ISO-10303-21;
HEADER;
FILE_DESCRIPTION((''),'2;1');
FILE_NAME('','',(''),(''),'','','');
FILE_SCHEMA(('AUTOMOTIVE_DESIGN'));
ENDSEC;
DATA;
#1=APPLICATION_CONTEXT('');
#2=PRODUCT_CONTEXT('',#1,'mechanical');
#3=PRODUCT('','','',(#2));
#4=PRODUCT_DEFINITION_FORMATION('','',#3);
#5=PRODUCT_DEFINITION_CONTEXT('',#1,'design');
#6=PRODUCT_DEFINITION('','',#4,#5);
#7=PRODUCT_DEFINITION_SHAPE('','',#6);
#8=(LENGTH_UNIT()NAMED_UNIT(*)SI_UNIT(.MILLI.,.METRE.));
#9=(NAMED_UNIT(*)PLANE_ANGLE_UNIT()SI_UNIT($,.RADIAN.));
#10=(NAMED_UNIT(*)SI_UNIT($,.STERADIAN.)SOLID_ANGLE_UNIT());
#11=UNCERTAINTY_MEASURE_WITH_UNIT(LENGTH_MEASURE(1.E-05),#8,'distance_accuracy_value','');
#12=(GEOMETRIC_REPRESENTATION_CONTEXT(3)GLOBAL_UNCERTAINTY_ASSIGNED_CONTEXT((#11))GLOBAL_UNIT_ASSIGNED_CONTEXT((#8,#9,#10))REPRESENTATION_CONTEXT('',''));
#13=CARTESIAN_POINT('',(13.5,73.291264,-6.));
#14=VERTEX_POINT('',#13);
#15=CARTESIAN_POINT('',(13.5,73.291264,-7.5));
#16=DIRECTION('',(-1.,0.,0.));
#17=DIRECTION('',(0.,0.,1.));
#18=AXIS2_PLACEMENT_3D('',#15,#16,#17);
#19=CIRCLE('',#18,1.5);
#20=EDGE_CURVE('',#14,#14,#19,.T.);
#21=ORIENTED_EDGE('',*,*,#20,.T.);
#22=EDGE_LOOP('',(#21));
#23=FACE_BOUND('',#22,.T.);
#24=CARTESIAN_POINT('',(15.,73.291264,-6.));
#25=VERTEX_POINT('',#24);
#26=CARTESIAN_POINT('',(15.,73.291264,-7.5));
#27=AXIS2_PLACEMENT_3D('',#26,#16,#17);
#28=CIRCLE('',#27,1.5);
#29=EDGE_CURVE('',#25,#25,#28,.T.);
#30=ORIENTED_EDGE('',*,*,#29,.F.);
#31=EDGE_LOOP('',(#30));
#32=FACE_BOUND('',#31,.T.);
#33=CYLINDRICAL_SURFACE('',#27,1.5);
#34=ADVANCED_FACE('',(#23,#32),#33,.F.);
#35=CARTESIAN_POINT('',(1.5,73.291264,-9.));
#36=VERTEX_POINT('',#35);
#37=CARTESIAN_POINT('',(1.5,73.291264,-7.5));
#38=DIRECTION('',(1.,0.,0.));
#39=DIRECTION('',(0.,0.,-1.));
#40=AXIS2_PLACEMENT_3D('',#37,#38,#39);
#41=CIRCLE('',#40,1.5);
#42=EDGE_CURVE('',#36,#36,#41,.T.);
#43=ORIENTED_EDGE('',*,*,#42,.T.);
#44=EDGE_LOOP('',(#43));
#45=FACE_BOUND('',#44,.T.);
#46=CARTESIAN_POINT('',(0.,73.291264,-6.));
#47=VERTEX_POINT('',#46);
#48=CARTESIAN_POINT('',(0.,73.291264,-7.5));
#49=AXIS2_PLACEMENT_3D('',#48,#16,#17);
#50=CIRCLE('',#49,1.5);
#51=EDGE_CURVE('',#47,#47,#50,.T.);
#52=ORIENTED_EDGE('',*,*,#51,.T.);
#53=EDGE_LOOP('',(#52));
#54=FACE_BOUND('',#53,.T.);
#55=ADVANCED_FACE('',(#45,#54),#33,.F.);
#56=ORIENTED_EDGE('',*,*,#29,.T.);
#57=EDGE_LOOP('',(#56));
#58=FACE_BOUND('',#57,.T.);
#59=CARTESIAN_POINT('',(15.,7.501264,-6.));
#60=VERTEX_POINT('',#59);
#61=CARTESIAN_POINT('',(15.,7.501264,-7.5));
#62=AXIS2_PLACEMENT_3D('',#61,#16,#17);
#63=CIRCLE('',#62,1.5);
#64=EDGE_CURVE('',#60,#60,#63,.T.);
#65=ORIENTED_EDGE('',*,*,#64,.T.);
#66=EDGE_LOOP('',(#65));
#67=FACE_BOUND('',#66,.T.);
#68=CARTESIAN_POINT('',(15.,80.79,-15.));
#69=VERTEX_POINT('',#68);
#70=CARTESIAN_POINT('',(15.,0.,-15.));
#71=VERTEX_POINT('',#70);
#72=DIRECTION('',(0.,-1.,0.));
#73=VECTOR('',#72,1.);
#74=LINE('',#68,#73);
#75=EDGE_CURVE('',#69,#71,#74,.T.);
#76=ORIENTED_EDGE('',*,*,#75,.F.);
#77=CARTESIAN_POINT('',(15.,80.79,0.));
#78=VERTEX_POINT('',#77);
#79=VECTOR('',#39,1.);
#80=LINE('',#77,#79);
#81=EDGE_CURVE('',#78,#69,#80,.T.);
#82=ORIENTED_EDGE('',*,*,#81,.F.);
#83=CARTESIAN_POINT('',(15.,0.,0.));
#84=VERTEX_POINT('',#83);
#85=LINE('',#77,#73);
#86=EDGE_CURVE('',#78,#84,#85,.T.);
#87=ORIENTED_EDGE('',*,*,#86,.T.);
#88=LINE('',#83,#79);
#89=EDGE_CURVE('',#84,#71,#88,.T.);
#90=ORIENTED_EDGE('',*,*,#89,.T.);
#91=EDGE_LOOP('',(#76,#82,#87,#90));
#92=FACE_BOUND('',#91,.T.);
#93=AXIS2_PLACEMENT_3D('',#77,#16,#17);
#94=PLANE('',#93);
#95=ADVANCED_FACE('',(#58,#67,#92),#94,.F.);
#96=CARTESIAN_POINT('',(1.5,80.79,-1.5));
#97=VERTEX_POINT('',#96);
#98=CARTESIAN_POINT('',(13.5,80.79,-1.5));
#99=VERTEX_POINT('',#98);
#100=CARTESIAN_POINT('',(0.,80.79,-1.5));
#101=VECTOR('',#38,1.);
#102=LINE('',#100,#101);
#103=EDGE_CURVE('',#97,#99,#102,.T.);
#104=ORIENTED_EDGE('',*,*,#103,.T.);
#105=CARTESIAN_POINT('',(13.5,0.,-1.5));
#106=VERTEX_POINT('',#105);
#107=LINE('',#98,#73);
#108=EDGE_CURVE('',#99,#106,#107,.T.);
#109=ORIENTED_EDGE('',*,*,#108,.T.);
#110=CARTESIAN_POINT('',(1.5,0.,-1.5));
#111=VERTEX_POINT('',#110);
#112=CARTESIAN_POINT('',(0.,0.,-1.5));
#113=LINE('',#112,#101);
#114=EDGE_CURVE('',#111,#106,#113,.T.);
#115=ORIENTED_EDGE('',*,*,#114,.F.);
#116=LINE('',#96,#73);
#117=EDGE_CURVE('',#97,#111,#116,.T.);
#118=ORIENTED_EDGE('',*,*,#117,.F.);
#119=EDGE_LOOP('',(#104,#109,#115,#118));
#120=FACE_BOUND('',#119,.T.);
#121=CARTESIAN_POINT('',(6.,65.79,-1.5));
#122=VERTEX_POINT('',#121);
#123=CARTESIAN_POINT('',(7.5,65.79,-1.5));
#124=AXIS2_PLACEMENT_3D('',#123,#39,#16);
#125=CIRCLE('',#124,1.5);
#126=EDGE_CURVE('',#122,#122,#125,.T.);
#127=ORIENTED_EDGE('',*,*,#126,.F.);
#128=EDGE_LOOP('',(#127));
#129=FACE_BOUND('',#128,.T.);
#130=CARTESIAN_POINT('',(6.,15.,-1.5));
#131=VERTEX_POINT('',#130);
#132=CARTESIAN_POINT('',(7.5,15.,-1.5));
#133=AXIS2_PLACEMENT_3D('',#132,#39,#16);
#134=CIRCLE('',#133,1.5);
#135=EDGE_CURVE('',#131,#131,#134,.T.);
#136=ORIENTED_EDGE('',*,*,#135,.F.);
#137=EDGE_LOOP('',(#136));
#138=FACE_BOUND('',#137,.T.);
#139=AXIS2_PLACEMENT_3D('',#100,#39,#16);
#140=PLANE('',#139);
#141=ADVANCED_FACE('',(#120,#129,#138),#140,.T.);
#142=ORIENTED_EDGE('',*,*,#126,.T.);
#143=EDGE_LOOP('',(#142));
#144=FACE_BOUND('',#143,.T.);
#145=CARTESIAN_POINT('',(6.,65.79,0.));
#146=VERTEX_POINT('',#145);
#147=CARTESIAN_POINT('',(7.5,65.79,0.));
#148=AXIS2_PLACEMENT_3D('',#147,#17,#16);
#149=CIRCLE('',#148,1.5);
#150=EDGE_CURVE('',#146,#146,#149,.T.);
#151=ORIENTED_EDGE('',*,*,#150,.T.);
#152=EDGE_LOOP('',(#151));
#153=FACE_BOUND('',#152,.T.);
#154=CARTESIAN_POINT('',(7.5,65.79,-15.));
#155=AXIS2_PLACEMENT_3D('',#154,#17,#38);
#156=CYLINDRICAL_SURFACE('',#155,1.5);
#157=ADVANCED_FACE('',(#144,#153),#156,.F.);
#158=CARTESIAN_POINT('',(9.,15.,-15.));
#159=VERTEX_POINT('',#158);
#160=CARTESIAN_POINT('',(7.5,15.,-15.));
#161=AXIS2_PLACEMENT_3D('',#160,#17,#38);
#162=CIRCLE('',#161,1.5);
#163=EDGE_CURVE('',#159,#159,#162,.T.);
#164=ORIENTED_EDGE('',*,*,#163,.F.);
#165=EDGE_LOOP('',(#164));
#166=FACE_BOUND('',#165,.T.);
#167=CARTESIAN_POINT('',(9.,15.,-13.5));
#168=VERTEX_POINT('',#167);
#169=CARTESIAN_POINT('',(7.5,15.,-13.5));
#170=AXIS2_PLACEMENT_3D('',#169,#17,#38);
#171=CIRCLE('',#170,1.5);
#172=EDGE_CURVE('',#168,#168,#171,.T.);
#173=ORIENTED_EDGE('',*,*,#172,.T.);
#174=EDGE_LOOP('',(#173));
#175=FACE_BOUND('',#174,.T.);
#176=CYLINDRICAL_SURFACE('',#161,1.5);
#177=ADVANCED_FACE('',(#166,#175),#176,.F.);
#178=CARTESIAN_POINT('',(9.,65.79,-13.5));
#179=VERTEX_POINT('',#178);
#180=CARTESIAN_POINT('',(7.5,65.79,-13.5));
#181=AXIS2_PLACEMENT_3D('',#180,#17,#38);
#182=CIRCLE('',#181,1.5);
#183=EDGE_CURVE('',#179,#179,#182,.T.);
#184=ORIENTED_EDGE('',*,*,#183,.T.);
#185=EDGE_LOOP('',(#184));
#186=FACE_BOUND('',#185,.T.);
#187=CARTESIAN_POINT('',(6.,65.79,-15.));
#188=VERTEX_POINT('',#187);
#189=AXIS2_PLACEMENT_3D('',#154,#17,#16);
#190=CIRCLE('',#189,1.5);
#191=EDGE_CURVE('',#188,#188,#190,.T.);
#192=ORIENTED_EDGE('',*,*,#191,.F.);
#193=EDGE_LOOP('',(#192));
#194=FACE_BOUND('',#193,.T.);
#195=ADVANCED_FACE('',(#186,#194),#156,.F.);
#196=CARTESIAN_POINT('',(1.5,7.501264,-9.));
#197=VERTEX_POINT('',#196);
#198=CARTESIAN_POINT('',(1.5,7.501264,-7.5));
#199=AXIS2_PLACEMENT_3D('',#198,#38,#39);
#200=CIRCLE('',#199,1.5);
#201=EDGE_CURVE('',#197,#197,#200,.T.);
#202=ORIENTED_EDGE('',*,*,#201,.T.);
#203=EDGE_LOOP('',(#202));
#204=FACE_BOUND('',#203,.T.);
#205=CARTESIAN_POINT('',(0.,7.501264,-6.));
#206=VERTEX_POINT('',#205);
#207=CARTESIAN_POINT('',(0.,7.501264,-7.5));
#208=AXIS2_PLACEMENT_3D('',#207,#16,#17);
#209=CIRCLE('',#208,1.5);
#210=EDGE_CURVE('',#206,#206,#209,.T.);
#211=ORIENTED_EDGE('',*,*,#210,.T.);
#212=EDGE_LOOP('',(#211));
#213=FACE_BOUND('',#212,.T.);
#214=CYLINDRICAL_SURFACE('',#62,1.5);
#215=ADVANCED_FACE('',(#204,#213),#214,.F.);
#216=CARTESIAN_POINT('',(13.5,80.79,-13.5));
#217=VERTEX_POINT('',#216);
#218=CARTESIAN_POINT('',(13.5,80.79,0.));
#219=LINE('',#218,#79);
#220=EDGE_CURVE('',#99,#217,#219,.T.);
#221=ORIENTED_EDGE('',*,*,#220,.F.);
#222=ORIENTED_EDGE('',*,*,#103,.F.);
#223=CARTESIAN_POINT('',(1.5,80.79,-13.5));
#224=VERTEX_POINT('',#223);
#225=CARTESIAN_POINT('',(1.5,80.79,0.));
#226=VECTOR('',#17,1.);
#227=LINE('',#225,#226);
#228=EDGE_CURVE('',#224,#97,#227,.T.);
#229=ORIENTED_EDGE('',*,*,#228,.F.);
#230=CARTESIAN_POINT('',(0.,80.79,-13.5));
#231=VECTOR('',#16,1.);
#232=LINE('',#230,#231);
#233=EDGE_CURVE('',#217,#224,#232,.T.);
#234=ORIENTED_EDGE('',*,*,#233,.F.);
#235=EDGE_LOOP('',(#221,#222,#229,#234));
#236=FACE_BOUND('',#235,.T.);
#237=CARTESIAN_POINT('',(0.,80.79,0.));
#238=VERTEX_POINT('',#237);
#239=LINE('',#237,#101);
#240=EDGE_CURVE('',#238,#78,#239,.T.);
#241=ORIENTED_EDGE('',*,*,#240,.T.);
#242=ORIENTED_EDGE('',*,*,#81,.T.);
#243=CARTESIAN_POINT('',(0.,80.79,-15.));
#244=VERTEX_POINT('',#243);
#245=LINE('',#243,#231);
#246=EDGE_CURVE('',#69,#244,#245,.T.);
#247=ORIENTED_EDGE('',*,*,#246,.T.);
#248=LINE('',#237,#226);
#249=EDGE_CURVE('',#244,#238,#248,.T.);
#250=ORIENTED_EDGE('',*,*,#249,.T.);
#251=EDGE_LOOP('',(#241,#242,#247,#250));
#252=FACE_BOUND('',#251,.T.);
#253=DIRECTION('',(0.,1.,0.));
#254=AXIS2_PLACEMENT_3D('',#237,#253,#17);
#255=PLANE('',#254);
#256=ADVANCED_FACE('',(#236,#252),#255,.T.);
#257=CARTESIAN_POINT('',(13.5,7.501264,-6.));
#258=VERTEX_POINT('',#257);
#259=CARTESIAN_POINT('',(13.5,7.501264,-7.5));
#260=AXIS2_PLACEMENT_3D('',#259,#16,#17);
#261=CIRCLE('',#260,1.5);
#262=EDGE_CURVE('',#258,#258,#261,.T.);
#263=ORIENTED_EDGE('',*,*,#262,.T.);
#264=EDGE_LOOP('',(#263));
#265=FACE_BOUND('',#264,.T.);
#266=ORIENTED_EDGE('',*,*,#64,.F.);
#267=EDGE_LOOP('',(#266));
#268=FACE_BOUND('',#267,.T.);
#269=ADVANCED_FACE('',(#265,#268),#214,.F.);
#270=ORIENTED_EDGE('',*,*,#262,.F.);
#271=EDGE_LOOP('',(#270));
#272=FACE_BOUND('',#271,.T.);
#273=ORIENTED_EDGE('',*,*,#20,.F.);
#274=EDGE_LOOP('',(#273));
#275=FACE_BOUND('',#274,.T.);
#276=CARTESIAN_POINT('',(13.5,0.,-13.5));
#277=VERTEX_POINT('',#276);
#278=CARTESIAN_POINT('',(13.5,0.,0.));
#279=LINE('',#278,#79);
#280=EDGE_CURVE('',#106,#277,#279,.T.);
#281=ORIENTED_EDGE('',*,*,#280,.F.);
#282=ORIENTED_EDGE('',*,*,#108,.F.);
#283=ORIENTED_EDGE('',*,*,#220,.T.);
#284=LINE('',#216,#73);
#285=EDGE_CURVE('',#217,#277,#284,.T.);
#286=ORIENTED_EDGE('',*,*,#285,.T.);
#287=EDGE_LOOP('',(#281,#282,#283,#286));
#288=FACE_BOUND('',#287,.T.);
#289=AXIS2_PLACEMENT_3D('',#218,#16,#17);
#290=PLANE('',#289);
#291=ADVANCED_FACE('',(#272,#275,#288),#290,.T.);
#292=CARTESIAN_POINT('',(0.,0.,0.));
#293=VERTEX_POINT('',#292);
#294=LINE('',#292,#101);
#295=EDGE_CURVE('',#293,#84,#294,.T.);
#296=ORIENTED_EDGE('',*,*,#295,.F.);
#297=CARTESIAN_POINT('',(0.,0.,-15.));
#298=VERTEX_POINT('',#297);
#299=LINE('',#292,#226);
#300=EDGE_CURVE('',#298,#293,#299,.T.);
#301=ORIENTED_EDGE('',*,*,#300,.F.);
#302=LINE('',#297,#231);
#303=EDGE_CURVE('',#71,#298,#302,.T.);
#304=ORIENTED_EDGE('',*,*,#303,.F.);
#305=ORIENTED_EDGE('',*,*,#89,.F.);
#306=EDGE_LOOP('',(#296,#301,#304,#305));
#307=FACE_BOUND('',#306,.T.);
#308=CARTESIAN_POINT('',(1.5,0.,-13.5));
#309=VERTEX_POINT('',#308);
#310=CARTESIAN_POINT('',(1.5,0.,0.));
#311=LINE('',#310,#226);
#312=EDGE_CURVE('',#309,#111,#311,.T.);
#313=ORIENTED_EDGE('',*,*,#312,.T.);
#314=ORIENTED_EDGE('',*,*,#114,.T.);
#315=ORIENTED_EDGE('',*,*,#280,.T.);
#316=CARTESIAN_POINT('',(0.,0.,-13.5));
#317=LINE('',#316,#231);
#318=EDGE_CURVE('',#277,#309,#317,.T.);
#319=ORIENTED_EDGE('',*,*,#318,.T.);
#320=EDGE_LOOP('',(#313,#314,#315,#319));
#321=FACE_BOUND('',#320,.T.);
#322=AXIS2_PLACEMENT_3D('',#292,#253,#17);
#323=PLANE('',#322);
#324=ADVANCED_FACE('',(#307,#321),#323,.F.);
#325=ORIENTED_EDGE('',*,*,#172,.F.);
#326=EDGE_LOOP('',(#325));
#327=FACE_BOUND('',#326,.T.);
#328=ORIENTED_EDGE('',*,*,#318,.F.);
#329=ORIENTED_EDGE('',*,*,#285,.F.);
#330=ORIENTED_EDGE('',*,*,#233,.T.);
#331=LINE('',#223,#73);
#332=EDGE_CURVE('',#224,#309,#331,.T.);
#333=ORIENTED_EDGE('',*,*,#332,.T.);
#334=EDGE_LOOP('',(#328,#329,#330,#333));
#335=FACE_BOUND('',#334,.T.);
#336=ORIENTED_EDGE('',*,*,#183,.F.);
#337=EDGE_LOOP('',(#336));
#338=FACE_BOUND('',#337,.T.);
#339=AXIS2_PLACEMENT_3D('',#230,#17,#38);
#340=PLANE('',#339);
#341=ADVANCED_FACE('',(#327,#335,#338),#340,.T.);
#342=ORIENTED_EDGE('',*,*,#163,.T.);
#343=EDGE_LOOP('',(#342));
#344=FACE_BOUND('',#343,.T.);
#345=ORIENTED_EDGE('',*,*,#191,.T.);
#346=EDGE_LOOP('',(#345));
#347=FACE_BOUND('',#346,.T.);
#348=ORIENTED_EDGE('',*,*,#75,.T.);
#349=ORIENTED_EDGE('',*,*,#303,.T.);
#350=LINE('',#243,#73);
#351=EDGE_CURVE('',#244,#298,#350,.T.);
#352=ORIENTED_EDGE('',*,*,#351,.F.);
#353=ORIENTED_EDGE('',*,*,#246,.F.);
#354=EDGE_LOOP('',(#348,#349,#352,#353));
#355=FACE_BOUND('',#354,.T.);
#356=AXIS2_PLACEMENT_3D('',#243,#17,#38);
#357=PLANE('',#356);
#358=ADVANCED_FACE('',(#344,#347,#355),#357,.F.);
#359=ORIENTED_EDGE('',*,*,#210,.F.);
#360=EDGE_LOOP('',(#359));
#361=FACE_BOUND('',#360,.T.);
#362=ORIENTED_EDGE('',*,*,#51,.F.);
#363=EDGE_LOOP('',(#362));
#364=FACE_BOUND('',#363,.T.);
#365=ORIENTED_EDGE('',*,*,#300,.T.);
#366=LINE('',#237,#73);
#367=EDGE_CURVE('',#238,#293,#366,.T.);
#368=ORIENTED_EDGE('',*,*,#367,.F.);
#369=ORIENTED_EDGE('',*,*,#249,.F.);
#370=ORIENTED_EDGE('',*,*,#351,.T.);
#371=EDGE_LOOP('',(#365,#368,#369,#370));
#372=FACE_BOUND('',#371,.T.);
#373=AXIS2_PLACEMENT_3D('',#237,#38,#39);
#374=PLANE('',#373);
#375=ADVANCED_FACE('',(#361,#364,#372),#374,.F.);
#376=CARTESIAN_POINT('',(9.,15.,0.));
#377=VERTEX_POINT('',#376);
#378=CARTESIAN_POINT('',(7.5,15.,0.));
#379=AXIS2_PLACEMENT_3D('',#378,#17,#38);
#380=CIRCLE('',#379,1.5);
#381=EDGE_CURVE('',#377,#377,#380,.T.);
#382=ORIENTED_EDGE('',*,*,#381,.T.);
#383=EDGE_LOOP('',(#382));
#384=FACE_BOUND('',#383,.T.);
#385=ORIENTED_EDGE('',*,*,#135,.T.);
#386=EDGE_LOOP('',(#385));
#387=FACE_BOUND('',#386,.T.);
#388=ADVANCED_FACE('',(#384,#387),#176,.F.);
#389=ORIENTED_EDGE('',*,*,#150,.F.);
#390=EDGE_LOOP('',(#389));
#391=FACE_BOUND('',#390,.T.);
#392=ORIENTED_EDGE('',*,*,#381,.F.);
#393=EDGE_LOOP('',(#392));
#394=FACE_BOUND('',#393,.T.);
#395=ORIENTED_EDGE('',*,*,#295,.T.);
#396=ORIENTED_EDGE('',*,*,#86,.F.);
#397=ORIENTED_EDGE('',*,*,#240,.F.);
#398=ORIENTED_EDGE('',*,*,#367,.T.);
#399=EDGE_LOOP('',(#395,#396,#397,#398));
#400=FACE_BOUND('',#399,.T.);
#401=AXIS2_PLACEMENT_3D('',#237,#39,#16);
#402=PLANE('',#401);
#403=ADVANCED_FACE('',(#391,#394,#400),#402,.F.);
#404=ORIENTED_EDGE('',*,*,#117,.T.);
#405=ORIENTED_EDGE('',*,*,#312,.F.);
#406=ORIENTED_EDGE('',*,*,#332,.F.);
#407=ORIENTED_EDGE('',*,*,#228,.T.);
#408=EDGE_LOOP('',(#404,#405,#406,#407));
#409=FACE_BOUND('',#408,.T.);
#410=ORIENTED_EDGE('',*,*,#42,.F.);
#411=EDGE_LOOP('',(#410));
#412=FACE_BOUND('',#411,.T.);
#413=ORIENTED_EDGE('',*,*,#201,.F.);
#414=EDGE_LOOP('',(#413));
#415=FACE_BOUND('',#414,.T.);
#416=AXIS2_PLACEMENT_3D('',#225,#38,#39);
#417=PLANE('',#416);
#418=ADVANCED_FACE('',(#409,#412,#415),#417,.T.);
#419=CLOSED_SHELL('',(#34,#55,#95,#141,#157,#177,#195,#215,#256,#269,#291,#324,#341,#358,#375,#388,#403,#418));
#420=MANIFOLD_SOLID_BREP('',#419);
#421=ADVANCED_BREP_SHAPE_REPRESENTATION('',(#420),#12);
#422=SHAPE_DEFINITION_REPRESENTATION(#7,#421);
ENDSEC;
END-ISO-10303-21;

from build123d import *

# Parameters (mm, degrees)
SKETCH1_W              = 15
SKETCH1_H              = 15
SKETCH1_W_2            = 12
SKETCH1_H_2            = 12
EXTRUDE_THIN1_DEPTH    = 80.79
CUT_EXTRUDE1_OUTLINE_R = 1.5
CUT_EXTRUDE1_DEPTH     = 15
SKETCH3_R              = 1.5
CUT_EXTRUDE2_DEPTH     = 84.528582533


# Read off the part's stored shape, not the designer's step: Cut-Extrude1
with BuildPart() as part:
    # Sketch1 → Extrude-Thin1 (new body)
    with BuildSketch(Plane(origin=(0, 0, 0), x_dir=(1, 0, 0), z_dir=(0, 1, 0))):
        with Locations((7.5, 7.5)):
            Rectangle(SKETCH1_W, SKETCH1_H)
        with Locations((7.5, 7.5)):
            Rectangle(SKETCH1_W_2, SKETCH1_H_2, mode=Mode.SUBTRACT)
    extrude(amount=EXTRUDE_THIN1_DEPTH)

    # Cut-Extrude1 outline → Cut-Extrude1 (cut)
    with BuildSketch(Plane.YZ):
        with Locations((73.291264227, -7.5)):
            Circle(CUT_EXTRUDE1_OUTLINE_R)
        with Locations((7.501264227, -7.5)):
            Circle(CUT_EXTRUDE1_OUTLINE_R)
    extrude(amount=CUT_EXTRUDE1_DEPTH, mode=Mode.SUBTRACT)

    # Sketch3 → Cut-Extrude2 (cut, through all)
    with BuildSketch(Plane.XY):
        with Locations((7.5, 15)):
            Circle(SKETCH3_R)
        with Locations((7.5, 65.79)):
            Circle(SKETCH3_R)
    extrude(amount=-CUT_EXTRUDE2_DEPTH, mode=Mode.SUBTRACT)


solid = part.part
